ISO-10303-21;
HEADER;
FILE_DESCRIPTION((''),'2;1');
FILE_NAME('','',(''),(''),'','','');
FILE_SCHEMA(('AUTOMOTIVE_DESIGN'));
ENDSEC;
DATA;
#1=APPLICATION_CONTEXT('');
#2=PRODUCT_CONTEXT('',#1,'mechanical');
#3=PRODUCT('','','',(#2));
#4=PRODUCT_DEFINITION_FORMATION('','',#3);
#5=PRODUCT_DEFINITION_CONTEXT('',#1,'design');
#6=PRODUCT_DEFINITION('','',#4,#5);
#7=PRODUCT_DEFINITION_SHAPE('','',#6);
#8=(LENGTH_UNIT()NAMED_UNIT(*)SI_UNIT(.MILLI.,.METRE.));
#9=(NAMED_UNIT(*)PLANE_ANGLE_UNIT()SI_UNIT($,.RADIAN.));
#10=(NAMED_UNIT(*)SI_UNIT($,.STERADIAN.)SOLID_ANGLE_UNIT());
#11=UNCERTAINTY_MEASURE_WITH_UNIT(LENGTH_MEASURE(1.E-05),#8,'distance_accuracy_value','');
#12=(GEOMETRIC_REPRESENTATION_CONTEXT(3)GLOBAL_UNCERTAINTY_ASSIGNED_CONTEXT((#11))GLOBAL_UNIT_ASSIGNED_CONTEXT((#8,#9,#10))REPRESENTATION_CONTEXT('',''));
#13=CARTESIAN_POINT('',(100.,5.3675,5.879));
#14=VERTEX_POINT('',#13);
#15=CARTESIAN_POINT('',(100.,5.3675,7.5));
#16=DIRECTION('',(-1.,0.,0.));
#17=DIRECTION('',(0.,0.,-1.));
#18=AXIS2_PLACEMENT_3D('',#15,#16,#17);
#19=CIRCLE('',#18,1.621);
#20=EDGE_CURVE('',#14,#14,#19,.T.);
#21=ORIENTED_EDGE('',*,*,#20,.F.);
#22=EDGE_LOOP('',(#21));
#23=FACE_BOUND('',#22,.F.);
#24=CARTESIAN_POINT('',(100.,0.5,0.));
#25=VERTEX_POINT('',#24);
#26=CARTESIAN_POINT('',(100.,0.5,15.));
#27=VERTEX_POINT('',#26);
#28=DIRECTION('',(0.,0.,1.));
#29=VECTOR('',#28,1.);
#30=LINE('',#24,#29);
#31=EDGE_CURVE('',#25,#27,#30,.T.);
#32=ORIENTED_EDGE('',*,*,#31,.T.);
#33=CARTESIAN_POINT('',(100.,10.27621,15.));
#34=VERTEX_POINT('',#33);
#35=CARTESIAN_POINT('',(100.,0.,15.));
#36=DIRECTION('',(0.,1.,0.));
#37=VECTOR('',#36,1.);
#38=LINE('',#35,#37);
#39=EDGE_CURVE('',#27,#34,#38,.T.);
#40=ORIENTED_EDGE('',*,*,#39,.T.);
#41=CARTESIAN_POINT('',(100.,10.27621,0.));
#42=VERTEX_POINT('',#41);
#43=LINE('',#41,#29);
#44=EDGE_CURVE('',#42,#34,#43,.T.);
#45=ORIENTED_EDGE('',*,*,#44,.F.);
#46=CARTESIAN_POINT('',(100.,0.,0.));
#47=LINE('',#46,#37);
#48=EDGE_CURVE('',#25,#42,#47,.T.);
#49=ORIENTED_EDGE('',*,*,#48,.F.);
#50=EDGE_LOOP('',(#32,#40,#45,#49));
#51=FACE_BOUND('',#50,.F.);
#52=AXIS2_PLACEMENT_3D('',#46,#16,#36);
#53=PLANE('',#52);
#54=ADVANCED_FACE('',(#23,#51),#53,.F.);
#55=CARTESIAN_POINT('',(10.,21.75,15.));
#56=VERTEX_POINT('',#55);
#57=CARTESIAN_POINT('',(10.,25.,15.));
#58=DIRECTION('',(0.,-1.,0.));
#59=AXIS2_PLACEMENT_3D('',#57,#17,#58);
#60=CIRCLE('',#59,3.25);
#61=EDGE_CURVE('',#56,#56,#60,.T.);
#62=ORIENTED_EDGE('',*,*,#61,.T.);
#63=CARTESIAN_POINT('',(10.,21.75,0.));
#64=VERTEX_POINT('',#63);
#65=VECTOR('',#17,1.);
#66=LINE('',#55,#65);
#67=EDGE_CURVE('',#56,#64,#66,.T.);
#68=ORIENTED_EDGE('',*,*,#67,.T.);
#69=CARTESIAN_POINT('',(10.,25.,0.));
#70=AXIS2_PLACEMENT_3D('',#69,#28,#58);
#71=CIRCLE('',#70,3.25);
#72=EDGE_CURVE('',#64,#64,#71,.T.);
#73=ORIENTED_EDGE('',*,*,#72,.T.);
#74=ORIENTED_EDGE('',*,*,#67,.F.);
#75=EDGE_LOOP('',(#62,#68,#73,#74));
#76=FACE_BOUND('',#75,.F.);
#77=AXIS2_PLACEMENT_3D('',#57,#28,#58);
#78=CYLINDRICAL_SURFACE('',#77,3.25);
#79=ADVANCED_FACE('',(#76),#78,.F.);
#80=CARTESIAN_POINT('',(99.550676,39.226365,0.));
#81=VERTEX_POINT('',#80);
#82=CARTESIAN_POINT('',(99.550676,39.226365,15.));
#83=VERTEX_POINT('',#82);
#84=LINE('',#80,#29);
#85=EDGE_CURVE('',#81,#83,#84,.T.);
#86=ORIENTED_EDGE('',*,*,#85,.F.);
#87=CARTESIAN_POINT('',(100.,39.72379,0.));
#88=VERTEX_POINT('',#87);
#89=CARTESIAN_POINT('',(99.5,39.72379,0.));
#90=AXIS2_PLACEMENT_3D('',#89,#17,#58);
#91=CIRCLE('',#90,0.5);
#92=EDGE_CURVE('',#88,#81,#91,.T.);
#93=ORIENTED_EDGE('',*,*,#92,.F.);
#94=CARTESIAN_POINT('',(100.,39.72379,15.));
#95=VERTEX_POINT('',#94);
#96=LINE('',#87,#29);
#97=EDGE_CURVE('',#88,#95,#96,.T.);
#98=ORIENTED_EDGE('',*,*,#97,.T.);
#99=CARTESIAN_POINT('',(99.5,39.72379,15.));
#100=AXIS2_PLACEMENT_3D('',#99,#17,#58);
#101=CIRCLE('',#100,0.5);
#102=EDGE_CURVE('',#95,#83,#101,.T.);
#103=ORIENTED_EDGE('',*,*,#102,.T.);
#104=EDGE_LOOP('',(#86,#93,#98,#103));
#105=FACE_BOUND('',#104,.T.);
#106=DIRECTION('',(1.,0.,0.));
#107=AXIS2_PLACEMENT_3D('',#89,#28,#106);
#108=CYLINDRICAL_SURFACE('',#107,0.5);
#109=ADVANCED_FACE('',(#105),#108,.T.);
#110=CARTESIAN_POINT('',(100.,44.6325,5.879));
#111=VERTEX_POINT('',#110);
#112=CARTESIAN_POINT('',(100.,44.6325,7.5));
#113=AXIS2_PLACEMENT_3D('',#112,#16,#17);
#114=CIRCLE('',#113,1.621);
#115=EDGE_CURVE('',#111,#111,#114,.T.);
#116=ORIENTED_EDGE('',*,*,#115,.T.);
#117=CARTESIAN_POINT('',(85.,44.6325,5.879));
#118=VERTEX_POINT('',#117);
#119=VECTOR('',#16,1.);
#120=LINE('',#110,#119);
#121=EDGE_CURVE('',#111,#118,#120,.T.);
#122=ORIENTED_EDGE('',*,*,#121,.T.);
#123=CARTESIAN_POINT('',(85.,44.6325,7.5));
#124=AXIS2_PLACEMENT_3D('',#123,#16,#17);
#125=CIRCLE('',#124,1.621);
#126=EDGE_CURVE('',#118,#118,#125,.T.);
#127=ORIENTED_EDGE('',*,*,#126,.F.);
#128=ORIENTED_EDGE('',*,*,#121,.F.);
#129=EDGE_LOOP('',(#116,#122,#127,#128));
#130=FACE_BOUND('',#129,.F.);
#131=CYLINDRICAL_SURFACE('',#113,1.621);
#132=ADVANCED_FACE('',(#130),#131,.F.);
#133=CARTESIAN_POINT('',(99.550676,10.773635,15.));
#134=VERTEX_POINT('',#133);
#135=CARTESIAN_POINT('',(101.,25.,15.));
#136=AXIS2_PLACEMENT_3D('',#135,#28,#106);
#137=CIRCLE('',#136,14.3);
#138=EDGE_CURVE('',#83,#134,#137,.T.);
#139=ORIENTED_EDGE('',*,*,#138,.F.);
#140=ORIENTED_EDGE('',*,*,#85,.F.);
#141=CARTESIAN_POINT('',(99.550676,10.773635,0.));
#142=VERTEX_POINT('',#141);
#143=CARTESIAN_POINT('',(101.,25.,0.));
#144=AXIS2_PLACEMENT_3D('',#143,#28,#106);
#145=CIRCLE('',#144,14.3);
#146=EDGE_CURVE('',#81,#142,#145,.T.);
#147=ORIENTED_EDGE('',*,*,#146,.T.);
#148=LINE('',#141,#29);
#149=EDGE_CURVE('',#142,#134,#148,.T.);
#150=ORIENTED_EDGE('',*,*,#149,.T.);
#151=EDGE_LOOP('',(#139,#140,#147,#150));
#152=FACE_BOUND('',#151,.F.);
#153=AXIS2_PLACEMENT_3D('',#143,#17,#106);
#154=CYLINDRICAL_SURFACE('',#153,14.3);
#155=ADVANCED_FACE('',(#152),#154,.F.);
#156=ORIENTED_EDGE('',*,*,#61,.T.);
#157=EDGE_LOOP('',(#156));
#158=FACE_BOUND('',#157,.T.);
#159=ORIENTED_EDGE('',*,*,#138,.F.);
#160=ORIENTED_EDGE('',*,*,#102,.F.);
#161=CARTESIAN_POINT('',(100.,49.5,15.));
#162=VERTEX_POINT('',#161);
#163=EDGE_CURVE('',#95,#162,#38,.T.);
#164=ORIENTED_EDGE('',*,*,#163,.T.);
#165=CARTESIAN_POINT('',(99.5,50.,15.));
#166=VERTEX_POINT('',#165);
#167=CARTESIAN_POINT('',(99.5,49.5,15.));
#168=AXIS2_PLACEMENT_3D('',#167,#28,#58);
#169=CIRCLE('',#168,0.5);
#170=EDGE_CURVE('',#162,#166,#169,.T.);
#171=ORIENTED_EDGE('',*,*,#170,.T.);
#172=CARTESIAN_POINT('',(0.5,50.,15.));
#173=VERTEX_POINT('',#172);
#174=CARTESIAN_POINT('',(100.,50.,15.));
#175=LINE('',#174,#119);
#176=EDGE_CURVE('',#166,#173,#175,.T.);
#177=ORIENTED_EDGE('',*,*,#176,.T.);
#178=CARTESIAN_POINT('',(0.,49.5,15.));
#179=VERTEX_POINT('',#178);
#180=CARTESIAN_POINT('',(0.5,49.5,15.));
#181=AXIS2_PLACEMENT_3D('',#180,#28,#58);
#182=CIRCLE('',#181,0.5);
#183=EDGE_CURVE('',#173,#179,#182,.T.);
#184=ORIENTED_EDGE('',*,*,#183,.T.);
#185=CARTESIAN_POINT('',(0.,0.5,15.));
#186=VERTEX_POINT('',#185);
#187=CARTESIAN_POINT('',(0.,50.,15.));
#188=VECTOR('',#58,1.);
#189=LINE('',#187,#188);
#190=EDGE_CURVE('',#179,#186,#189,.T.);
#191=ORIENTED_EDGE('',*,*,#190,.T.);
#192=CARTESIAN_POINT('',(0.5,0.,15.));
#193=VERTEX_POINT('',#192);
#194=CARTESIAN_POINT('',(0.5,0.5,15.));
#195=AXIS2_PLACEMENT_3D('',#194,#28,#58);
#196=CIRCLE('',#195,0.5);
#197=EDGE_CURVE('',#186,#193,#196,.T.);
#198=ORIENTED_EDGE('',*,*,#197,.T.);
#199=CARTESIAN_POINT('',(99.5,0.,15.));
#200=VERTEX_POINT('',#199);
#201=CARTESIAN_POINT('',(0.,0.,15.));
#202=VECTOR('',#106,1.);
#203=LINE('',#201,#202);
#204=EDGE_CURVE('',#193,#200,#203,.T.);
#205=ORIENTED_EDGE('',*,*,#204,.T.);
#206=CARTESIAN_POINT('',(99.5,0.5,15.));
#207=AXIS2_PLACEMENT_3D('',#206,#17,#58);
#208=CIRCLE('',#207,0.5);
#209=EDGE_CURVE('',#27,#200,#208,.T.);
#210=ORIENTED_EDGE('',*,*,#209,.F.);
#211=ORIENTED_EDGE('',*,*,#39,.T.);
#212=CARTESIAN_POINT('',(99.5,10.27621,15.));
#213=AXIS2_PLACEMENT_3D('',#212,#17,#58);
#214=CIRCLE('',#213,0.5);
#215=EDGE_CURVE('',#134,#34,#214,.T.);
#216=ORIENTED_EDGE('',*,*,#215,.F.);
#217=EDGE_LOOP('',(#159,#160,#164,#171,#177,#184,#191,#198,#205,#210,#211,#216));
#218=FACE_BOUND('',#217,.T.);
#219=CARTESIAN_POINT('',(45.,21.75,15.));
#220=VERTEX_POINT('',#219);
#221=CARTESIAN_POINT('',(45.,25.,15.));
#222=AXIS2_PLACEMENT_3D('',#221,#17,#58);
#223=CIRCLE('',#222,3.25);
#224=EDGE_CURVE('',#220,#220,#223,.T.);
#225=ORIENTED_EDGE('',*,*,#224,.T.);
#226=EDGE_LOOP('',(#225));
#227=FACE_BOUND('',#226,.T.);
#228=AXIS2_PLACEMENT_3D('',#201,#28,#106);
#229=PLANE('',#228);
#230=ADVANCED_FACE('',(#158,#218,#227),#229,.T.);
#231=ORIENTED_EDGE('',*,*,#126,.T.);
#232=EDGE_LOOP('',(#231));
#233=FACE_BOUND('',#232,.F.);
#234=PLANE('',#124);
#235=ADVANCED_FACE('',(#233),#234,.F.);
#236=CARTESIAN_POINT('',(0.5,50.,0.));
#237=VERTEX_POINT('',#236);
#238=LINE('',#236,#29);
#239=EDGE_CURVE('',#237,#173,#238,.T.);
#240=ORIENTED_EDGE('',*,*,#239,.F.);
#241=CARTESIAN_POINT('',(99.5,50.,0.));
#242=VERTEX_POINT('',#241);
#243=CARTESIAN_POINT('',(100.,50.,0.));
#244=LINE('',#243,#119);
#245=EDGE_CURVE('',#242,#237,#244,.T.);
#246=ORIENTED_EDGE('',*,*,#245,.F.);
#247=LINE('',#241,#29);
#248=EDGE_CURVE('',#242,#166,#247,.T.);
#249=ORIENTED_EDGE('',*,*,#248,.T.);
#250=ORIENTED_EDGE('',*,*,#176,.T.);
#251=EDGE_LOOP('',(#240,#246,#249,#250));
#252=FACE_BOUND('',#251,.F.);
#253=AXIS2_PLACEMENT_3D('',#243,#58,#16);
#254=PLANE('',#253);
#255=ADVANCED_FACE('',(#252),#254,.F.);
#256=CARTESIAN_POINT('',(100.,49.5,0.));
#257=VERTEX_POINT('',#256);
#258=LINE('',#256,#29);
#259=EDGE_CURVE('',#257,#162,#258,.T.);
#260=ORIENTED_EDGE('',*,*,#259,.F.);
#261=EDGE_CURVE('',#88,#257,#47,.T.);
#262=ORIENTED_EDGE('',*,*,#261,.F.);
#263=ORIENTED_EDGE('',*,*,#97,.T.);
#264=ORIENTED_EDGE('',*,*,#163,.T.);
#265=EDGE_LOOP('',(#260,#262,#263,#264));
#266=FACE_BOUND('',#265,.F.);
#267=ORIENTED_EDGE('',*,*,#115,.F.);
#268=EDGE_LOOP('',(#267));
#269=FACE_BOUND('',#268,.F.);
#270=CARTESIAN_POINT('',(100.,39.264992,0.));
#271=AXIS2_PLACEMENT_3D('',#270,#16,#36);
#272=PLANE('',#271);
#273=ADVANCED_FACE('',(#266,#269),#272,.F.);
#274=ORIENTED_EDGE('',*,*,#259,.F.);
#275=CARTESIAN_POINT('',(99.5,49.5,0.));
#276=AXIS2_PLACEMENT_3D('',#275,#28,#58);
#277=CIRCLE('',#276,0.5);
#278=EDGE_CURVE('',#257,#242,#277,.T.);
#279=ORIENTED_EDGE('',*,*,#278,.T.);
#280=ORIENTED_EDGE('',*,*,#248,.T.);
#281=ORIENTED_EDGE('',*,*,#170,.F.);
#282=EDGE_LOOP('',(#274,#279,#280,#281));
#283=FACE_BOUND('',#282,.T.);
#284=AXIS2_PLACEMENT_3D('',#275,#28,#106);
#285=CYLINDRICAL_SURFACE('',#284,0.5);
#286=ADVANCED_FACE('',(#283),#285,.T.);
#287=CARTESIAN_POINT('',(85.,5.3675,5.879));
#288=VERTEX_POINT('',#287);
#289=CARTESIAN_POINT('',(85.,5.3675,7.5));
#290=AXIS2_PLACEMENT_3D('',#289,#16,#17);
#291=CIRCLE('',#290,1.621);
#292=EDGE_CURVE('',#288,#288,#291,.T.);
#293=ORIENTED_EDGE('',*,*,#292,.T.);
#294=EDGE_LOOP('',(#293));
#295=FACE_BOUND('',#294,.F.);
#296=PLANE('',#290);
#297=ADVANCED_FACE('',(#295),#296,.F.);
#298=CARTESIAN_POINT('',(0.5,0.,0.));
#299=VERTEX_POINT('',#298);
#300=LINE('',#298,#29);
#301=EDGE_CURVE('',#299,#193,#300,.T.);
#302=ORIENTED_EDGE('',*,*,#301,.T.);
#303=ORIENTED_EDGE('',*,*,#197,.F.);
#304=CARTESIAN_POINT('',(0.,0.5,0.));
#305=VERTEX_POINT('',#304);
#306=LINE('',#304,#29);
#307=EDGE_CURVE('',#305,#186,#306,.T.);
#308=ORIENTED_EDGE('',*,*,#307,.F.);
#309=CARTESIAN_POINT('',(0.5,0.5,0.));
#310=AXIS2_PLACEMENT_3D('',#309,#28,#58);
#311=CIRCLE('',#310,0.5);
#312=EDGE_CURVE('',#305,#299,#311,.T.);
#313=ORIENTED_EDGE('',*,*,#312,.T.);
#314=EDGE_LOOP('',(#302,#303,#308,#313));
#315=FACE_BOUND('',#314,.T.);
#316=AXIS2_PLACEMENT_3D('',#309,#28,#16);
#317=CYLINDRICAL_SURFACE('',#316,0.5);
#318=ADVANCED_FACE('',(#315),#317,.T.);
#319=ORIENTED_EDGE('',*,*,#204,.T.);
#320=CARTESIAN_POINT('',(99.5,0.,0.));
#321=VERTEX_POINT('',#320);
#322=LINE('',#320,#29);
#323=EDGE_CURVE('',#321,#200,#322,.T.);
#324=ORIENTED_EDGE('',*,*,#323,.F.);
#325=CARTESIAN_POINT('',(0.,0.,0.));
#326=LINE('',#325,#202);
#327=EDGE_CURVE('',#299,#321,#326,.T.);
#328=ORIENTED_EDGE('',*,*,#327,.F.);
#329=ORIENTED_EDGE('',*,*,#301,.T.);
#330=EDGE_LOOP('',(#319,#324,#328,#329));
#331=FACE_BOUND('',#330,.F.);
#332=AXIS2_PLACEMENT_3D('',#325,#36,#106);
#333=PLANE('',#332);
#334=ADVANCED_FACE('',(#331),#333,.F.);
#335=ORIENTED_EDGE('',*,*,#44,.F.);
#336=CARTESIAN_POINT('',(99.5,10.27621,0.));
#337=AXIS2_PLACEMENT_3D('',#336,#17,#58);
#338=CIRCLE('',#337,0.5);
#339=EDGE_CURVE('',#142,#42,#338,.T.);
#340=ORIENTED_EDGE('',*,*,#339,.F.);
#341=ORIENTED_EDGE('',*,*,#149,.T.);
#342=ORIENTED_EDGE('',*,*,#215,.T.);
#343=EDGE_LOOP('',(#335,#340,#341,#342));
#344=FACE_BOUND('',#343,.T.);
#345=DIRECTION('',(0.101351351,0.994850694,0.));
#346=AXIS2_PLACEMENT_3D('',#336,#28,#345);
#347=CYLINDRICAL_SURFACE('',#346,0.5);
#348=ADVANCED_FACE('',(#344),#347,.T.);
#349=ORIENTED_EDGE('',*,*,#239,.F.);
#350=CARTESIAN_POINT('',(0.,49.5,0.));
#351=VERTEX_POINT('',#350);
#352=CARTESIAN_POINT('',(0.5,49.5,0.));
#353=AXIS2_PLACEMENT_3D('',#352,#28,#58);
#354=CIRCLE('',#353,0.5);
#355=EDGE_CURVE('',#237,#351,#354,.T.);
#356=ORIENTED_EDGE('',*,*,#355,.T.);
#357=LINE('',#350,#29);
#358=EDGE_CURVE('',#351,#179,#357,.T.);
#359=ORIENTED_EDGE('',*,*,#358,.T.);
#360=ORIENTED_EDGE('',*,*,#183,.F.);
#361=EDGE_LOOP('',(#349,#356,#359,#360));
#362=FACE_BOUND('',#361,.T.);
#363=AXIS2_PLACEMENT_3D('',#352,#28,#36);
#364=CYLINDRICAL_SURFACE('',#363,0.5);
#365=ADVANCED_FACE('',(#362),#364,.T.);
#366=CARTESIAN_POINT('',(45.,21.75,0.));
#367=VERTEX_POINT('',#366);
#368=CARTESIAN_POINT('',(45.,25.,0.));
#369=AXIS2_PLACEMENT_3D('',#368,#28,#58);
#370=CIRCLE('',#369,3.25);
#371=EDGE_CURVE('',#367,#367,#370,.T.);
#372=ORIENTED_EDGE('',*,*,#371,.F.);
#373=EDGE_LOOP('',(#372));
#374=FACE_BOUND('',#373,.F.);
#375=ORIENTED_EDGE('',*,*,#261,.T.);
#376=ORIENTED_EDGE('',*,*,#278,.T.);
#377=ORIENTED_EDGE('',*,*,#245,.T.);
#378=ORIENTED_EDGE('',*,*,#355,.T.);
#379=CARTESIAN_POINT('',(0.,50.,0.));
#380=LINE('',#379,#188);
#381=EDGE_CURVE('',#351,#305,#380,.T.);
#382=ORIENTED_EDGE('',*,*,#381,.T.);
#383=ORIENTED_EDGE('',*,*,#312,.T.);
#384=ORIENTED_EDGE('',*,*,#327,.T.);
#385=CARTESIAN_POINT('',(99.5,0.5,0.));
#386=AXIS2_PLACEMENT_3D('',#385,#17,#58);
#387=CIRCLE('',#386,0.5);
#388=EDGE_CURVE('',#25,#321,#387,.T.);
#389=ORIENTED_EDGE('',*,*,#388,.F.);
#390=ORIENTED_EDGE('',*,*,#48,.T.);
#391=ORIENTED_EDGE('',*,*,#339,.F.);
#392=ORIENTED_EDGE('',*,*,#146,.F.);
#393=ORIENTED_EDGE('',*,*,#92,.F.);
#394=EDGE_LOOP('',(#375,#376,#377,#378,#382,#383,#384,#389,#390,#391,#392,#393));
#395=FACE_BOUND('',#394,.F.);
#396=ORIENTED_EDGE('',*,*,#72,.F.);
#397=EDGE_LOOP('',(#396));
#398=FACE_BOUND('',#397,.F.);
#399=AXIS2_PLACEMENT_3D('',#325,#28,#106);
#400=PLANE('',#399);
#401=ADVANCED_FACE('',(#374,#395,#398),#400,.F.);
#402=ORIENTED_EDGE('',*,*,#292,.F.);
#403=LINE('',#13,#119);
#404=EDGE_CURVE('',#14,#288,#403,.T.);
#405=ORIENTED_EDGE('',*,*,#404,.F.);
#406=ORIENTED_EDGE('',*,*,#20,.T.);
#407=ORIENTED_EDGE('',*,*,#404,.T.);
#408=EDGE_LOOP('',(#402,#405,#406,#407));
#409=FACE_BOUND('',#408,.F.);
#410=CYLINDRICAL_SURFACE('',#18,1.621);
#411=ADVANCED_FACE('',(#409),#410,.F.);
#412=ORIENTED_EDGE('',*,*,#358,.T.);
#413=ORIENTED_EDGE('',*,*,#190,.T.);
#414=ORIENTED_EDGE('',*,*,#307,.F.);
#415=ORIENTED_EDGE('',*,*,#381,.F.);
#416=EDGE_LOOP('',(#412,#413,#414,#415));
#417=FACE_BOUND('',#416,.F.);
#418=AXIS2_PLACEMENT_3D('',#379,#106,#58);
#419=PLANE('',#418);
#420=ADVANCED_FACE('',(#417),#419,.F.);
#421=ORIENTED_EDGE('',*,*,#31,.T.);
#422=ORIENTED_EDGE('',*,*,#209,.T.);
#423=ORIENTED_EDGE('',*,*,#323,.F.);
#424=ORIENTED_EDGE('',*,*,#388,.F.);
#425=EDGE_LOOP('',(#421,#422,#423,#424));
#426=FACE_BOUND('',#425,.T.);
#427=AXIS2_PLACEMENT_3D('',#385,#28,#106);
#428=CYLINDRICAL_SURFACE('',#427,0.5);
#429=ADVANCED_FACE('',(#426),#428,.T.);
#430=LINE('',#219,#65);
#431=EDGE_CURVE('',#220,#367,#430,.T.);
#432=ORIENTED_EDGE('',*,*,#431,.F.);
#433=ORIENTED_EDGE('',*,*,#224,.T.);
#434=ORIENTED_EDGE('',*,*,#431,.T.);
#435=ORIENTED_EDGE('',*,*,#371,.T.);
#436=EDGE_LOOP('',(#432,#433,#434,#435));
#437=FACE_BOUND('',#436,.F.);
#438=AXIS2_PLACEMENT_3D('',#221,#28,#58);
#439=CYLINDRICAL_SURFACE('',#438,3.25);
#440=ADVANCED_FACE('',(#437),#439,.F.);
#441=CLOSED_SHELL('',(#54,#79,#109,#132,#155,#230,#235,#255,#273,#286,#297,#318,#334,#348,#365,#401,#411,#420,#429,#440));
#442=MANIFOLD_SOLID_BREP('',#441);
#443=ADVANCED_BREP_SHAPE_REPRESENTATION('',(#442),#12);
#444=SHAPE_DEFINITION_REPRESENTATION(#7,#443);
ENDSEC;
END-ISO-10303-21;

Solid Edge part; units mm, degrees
sketch "Sketch1" plane through (0, 0, 0) normal (0, 0, 1) x (1, 0, 0)
  line L0 (0, 0) -> (100, 0)
  line L1 (100, 0) -> (100, 50)
  circle A0 centre (101, 25) radius 14.3
  line L2 (100, 50) -> (0, 50)
  line L3 (0, 50) -> (0, 0)
extrude "Protrusion1" add sketch "Sketch1" along normal blind 15
hole "Bohrung_1" at (100, 5.3675, 7.5) direction (-1, 0, 0) diameter 3.242 depth 15 thread major 4 thread length 10
hole "Hole1" at (100, 44.6325, 7.5) direction (-1, 0, 0) diameter 3.242 depth 15 thread major 4 thread length 10
hole "Bohrung_3" at (10, 25, 15) direction (0, 0, -1) diameter 6.5 end through all
hole "Hole2" at (45, 25, 15) direction (0, 0, -1) diameter 6.5 end through all
fillet "Verrundung_2" radius 0.5 6 edges at (0, 50, 7.5) (0, 0, 7.5) (100, 0, 7.5) (100, 10.735, 7.5) (100, 39.265, 7.5) (100, 50, 7.5)
